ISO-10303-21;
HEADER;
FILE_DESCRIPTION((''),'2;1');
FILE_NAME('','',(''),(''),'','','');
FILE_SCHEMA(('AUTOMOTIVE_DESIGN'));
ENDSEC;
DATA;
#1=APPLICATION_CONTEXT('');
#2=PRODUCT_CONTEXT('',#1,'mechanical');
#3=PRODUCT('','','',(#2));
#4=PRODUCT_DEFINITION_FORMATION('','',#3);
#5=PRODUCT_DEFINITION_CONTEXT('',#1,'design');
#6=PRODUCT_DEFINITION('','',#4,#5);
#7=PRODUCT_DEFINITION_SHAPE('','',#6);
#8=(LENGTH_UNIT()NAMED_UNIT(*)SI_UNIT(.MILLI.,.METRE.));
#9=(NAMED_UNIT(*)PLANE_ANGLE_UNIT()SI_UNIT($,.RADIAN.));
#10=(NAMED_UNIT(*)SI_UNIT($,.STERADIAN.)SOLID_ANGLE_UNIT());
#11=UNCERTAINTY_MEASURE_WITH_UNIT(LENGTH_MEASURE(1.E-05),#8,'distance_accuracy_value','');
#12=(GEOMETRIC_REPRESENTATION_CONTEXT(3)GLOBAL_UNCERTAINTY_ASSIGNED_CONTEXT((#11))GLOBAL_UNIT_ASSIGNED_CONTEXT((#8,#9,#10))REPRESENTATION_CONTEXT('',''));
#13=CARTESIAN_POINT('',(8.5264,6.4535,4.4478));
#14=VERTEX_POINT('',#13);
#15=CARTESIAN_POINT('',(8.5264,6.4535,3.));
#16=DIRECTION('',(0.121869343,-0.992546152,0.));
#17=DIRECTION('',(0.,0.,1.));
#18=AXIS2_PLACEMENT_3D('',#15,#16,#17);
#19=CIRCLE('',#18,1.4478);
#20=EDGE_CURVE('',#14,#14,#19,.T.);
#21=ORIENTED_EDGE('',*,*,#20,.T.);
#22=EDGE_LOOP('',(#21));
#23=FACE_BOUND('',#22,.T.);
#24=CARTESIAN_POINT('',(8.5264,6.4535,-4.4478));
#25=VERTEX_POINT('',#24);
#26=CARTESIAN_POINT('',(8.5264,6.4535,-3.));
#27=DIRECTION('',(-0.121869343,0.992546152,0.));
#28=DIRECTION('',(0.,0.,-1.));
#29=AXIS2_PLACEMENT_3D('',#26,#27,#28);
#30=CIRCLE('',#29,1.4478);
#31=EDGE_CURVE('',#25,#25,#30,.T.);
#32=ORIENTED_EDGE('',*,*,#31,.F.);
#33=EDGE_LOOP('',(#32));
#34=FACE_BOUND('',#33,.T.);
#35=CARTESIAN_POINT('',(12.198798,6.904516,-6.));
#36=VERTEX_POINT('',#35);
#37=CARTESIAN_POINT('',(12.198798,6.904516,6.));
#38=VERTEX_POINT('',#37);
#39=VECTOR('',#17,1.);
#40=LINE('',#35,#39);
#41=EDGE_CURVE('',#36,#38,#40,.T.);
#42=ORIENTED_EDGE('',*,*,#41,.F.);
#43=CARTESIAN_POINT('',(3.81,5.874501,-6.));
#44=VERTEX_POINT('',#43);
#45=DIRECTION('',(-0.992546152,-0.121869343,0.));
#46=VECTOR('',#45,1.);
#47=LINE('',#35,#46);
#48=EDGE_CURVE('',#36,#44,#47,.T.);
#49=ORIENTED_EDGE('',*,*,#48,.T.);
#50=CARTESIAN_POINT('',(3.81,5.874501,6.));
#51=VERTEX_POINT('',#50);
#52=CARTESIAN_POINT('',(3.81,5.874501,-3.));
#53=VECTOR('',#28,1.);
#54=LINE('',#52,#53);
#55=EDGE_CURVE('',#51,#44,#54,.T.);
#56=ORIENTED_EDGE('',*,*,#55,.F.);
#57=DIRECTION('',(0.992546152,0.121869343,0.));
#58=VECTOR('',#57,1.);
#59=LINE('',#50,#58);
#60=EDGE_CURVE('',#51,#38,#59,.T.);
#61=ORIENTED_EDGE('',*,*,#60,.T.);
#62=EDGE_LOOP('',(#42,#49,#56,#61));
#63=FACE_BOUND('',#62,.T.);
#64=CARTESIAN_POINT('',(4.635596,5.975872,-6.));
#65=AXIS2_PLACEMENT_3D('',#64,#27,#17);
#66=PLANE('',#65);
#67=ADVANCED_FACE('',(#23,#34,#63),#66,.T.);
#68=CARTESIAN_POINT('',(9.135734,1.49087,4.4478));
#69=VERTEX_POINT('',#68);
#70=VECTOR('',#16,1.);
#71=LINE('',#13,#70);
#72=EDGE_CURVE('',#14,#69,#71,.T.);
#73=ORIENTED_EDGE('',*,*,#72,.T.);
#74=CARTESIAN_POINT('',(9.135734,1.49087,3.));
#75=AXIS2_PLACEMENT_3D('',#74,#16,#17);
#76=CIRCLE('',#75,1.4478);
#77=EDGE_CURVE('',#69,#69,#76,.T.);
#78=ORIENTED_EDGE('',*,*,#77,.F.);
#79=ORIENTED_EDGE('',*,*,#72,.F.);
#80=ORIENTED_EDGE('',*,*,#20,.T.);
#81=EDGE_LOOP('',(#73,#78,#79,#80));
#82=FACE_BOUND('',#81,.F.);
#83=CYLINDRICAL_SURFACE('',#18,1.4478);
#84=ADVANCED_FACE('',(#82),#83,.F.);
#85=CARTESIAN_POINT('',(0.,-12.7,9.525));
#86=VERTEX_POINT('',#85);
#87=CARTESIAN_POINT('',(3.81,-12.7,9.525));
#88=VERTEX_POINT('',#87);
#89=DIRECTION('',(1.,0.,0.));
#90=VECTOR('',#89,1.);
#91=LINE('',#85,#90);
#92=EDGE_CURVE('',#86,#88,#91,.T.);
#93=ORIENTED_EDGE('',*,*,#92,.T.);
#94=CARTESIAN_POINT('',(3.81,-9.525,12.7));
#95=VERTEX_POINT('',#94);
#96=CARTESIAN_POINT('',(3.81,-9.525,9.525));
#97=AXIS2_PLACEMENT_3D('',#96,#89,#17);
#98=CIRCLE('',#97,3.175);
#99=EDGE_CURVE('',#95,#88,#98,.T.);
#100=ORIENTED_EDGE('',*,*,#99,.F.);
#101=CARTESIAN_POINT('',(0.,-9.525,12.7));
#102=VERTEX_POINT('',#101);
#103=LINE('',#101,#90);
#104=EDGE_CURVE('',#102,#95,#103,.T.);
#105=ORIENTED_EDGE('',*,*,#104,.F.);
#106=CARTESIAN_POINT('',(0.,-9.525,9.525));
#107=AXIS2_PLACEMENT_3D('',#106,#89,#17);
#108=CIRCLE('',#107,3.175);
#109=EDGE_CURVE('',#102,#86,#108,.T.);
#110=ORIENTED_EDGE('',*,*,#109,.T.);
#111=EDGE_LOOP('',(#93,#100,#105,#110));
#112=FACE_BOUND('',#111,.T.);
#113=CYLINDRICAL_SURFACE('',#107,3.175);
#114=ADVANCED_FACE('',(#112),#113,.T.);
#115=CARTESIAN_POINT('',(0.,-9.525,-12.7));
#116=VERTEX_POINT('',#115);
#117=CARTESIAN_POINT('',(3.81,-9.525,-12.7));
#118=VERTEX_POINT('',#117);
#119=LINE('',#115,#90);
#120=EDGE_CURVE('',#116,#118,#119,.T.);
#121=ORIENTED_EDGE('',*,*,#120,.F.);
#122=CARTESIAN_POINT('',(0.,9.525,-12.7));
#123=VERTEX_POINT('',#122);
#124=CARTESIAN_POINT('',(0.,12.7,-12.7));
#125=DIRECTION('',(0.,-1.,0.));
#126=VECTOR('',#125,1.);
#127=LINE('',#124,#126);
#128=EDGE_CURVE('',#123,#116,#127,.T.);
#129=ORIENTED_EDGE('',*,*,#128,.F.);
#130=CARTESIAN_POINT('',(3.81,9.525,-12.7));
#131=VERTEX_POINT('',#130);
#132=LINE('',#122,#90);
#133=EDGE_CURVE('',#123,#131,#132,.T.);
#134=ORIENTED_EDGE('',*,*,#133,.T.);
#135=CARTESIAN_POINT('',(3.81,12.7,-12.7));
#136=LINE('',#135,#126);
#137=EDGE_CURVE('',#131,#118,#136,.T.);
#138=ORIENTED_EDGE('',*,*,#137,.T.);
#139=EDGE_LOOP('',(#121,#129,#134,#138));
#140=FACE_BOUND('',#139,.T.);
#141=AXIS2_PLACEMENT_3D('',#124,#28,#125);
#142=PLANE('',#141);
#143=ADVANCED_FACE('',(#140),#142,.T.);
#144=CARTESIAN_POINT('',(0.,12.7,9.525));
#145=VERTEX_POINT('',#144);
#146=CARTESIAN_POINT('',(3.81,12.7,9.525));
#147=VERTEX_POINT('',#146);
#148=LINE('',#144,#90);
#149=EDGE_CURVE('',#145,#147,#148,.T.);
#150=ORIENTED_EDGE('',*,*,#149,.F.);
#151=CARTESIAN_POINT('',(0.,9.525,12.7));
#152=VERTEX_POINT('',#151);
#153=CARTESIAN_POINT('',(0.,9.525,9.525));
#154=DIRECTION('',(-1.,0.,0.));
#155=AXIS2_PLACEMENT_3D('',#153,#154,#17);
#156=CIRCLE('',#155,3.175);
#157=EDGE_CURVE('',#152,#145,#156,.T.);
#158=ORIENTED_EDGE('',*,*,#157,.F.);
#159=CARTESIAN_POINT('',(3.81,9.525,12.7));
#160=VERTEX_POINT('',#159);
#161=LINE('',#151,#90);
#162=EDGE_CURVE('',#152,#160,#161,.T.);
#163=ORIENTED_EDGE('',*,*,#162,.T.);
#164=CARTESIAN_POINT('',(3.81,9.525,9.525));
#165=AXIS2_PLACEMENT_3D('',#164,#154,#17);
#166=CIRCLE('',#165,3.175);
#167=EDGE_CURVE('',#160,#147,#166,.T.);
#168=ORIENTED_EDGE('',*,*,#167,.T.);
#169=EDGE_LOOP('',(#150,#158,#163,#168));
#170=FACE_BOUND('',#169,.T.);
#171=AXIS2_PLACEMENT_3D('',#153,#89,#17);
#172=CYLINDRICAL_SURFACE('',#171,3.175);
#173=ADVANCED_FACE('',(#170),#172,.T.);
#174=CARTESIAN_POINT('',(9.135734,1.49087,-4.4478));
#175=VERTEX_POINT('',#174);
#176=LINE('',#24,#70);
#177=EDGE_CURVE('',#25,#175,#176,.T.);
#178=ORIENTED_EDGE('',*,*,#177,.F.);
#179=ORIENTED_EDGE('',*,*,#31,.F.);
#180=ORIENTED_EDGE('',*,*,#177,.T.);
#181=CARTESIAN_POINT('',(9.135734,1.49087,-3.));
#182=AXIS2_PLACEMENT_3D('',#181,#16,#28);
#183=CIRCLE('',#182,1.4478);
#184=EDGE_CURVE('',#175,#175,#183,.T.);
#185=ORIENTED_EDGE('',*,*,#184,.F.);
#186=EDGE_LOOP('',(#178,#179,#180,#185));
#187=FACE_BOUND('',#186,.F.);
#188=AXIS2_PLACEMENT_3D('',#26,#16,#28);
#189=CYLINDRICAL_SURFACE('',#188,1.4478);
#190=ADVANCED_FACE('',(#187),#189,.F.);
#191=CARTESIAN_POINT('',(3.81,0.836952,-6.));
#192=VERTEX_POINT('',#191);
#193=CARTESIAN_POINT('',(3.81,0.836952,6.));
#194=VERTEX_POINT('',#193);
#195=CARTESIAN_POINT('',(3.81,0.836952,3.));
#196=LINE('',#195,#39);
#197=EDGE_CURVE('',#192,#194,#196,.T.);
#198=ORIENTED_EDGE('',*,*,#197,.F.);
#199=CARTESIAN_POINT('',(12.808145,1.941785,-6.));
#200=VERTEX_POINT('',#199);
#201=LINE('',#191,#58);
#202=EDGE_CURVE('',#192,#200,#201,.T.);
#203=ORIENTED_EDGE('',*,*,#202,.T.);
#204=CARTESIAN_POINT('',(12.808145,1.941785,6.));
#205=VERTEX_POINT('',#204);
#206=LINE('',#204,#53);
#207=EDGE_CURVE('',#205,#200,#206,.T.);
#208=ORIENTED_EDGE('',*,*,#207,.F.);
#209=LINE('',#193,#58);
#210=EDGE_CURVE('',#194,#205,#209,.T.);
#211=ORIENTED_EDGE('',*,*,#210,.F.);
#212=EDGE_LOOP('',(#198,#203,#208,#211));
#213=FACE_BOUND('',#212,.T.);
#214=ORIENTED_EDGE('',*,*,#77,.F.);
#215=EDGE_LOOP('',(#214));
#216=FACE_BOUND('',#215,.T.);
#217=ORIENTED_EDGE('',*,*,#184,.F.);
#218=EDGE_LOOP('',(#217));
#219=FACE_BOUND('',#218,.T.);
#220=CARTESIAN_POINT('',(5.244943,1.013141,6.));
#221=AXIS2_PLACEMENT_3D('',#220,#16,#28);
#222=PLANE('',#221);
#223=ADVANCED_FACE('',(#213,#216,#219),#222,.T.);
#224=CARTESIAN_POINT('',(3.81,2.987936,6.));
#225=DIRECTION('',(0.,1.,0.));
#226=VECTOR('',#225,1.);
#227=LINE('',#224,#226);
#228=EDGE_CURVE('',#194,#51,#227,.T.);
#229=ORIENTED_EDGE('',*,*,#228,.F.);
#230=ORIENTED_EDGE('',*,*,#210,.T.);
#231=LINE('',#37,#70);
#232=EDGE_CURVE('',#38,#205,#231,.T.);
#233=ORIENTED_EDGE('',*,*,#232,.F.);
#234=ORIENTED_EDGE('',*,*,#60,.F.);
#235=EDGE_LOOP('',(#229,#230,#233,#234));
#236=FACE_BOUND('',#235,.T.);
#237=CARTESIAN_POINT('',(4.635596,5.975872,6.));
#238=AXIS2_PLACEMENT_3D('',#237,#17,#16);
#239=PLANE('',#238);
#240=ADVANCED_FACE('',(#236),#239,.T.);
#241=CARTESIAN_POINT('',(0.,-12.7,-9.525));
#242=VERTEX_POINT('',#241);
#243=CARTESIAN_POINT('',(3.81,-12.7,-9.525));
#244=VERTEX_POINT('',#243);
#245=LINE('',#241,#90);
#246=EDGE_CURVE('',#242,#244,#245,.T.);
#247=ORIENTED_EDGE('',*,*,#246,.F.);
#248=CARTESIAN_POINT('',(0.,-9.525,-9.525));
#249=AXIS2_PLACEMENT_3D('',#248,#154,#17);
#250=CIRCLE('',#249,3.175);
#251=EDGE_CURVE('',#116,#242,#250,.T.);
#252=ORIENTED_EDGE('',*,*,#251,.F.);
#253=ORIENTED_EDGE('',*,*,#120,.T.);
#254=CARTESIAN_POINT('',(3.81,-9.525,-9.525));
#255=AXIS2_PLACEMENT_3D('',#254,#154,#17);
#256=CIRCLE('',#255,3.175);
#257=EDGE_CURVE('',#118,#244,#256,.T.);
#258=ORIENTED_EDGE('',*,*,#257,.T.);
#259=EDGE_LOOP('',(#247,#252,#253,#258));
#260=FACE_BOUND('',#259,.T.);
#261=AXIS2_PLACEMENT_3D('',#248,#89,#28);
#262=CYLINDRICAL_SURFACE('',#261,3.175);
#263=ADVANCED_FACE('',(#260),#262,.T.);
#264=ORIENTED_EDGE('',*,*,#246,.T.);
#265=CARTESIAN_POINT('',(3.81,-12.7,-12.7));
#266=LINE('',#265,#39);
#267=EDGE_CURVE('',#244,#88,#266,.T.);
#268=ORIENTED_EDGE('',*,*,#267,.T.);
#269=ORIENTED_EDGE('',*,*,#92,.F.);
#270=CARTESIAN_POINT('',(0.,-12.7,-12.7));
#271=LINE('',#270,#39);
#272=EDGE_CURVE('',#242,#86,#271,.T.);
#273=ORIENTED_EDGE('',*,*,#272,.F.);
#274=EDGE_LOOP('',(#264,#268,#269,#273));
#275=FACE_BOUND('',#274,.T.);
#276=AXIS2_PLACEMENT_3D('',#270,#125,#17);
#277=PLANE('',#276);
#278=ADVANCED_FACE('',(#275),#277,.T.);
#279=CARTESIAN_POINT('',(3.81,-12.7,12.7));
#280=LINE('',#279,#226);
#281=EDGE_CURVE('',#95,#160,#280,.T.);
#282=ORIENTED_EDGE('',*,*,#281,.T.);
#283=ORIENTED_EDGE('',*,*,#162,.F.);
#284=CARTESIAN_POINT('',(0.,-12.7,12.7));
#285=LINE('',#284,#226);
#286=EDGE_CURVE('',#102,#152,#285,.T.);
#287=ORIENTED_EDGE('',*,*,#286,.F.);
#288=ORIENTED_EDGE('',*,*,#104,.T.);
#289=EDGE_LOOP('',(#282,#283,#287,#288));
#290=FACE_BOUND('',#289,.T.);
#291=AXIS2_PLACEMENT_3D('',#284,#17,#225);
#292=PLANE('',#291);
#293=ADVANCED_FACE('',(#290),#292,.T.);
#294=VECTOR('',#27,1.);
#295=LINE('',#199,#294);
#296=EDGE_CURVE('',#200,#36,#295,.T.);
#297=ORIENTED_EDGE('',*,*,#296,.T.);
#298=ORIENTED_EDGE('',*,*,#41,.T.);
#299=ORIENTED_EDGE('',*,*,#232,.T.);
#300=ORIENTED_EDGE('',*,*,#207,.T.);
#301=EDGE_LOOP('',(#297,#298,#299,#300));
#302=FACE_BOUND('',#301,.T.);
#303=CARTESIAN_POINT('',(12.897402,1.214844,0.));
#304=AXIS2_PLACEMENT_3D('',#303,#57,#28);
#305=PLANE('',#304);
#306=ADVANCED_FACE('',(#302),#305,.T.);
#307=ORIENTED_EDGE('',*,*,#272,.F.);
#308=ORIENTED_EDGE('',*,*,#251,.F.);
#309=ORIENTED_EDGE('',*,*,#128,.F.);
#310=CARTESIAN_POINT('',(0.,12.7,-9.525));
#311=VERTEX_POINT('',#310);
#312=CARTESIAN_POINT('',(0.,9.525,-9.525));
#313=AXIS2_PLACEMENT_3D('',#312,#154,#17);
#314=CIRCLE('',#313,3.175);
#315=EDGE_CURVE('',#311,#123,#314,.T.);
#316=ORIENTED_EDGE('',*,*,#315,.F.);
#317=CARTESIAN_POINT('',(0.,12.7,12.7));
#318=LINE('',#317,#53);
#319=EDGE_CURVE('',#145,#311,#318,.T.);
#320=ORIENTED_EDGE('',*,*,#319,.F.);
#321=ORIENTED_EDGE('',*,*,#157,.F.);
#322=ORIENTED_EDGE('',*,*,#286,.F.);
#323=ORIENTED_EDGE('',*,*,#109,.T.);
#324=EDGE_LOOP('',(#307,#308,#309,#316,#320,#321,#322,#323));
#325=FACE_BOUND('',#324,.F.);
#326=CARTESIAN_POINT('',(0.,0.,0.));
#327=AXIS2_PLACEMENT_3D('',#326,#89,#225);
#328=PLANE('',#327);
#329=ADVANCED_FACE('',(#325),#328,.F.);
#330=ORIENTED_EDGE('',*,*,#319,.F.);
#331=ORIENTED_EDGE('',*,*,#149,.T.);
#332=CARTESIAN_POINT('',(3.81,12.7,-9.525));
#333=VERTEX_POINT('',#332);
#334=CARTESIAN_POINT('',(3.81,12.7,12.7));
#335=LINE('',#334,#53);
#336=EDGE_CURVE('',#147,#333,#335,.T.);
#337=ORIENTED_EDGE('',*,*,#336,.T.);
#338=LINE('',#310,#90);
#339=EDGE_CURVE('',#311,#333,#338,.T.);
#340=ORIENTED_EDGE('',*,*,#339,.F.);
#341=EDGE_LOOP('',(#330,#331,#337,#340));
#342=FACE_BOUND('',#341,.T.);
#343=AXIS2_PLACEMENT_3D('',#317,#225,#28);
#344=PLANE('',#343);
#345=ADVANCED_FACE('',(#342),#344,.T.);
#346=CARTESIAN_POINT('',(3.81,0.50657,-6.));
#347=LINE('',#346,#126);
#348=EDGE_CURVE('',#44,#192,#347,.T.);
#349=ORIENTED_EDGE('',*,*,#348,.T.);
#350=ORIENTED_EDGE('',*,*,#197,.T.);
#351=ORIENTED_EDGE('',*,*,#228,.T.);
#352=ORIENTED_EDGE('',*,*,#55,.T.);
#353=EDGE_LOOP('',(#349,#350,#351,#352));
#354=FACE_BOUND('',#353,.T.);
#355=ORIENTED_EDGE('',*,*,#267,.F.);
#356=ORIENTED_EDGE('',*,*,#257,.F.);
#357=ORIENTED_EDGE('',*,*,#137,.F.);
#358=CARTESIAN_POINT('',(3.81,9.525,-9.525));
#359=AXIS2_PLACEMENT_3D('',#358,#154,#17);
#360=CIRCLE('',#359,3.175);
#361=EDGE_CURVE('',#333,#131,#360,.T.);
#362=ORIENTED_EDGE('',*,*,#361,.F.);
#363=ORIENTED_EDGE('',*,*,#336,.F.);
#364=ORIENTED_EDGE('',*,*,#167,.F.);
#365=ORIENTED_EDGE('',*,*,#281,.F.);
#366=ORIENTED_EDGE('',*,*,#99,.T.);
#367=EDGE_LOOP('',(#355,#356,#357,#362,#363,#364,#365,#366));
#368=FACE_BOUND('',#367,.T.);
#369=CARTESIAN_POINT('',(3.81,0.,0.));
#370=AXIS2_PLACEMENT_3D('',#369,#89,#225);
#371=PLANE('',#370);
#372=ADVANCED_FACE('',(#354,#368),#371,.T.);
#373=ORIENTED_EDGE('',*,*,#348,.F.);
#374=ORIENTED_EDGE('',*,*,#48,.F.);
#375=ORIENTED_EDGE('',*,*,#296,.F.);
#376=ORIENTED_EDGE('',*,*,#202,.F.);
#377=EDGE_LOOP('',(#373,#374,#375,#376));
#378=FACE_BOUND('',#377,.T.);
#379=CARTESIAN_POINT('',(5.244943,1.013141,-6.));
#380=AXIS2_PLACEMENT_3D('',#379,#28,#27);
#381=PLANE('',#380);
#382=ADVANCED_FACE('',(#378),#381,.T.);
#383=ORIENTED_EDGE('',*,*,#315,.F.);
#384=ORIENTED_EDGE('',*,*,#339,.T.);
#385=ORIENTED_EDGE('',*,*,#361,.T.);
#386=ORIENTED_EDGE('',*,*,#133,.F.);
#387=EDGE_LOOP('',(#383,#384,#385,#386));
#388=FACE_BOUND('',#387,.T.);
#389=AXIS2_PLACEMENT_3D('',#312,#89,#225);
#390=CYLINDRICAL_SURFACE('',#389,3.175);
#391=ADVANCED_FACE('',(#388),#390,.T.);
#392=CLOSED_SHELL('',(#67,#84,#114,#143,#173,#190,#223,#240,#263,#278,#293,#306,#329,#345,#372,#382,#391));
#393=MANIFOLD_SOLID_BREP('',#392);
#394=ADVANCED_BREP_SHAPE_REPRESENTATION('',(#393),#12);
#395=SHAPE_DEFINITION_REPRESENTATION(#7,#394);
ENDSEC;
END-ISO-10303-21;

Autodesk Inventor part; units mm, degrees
ref_plane "YZ Plane" through (0, 0, 0) normal (1, 0, 0) x (0, 1, 0)
ref_plane "XZ Plane" through (0, 0, 0) normal (0, 1, 0) x (-1, 0, 0)
sketch "Sketch1" plane through (0, 0, 0) normal (1, 0, 0) x (0, 1, 0)
  line L0 (-12.7, 12.7) -> (12.7, 12.7)
  line L1 (12.7, 12.7) -> (12.7, -12.7)
  line L2 (12.7, -12.7) -> (-12.7, -12.7)
  line L3 (-12.7, -12.7) -> (-12.7, 12.7)
  line L4 (-12.7, 12.7) -> (12.7, -12.7) construction
  line L5 (12.7, 12.7) -> (-12.7, -12.7) construction
  point P0 (0, 0)
  dimension "d0" = 25.4
  dimension "d1" = 25.4
extrude "Extrusion1" add sketch "Sketch1" along normal blind 3.81
ref_plane "Work Plane2" through (3.81, 12.7, -12.7) normal (0.9925462, 0.1218693, 0) x (0, 0, 1)
sketch "Sketch2" plane through (5.3342, 0.2862, 0) normal (0.9925462, 0.1218693, 0) x (0, 0, -1)
  line L0 (-6, 0.7324) -> (6, 0.7324)
  line L1 (6, 0.7324) -> (6, 5.7324)
  line L2 (6, 5.7324) -> (-6, 5.7324)
  line L3 (-6, 5.7324) -> (-6, 0.7324)
  line L4 (-6, 0.7324) -> (6, 5.7324) construction
  line L5 (6, 0.7324) -> (-6, 5.7324) construction
  point P0 (0, 0.366)
  point P1 (0, 3.2324)
  dimension "d4" = 12
  dimension "d5" = 5
extrude "Extrusion2" add sketch "Sketch2" along normal blind 7.62
sketch "Sketch3" plane through (3.81, 5.8744, 6) normal (-0.1218693, 0.9925462, 0) x (0.9925462, 0.1218693, 0)
  line L0 (8.4518, 12) -> (8.4518, 0) projected
  line L1 (13.7995, 6) -> (-14.4563, 6) projected
  point P0 (-4.4975, 6)
  point P1 (4.7518, 3)
  dimension "d8" = 3.7
  dimension "d9" = 3
hole "Hole1" at (8.5264, 6.4535, 3) direction (0.1218693, -0.9925462, 0) diameter 2.8956 end through all clearance for "Flat Head Machine Screw" size "M2.5" standard "Ansi Metric M Profile"
mirror "Mirror1" about plane through (0, 0, 0) normal (0, 0, 1) of "Hole1"
sketch "Sketch4" plane through (0, 0, 0) normal (0, 0, 1) x (1, 0, 0)
  arc A0 (2.54, 0) -> (-200.66, 0) centre (-99.06, 0) ccw
  line L0 (0, 12.7) -> (0, -12.7) projected
  line L1 (-241.3, 0) -> (43.18, 0) projected
  line L2 (-200.66, 0) -> (2.54, 0)
  line L3 (-241.3, 0) -> (43.18, 0) projected
  point P0 (0, 0)
  dimension "d17" = 203.2
  dimension "d18" = 99.06
revolve "Revolution1" [suppressed]
fillet "Fillet1" radius 3.175 4 edges at (1.905, 12.7, -12.7) (1.905, 12.7, 12.7) (1.905, -12.7, 12.7) (1.905, -12.7, -12.7)
fillet "Fillet2" [suppressed]
sketch "Sketch5" plane through (5.3342, 0.2862, 0) normal (-0.9925462, -0.1218693, 0) x (0, 0, 1)
  line L0 (-6, 0.7324) -> (-6, 5.7324) projected
  line L1 (6, 0.7324) -> (-6, 0.7324) projected
  line L2 (6, 5.7324) -> (6, 0.7324) projected
  line L3 (-6, 5.7324) -> (6, 5.7324) projected
  point P0 (0, 0.366)
extrude "Extrusion3" add sketch "Sketch5" along normal up to surface surface through (3.81, 0, 0) normal (1, 0, 0)
ref_plane "Work Plane1" through (0, 0, 0) normal (0, 0, 1) x (1, 0, 0)
properties part number "BrakeShoeWithTilt_Base"
